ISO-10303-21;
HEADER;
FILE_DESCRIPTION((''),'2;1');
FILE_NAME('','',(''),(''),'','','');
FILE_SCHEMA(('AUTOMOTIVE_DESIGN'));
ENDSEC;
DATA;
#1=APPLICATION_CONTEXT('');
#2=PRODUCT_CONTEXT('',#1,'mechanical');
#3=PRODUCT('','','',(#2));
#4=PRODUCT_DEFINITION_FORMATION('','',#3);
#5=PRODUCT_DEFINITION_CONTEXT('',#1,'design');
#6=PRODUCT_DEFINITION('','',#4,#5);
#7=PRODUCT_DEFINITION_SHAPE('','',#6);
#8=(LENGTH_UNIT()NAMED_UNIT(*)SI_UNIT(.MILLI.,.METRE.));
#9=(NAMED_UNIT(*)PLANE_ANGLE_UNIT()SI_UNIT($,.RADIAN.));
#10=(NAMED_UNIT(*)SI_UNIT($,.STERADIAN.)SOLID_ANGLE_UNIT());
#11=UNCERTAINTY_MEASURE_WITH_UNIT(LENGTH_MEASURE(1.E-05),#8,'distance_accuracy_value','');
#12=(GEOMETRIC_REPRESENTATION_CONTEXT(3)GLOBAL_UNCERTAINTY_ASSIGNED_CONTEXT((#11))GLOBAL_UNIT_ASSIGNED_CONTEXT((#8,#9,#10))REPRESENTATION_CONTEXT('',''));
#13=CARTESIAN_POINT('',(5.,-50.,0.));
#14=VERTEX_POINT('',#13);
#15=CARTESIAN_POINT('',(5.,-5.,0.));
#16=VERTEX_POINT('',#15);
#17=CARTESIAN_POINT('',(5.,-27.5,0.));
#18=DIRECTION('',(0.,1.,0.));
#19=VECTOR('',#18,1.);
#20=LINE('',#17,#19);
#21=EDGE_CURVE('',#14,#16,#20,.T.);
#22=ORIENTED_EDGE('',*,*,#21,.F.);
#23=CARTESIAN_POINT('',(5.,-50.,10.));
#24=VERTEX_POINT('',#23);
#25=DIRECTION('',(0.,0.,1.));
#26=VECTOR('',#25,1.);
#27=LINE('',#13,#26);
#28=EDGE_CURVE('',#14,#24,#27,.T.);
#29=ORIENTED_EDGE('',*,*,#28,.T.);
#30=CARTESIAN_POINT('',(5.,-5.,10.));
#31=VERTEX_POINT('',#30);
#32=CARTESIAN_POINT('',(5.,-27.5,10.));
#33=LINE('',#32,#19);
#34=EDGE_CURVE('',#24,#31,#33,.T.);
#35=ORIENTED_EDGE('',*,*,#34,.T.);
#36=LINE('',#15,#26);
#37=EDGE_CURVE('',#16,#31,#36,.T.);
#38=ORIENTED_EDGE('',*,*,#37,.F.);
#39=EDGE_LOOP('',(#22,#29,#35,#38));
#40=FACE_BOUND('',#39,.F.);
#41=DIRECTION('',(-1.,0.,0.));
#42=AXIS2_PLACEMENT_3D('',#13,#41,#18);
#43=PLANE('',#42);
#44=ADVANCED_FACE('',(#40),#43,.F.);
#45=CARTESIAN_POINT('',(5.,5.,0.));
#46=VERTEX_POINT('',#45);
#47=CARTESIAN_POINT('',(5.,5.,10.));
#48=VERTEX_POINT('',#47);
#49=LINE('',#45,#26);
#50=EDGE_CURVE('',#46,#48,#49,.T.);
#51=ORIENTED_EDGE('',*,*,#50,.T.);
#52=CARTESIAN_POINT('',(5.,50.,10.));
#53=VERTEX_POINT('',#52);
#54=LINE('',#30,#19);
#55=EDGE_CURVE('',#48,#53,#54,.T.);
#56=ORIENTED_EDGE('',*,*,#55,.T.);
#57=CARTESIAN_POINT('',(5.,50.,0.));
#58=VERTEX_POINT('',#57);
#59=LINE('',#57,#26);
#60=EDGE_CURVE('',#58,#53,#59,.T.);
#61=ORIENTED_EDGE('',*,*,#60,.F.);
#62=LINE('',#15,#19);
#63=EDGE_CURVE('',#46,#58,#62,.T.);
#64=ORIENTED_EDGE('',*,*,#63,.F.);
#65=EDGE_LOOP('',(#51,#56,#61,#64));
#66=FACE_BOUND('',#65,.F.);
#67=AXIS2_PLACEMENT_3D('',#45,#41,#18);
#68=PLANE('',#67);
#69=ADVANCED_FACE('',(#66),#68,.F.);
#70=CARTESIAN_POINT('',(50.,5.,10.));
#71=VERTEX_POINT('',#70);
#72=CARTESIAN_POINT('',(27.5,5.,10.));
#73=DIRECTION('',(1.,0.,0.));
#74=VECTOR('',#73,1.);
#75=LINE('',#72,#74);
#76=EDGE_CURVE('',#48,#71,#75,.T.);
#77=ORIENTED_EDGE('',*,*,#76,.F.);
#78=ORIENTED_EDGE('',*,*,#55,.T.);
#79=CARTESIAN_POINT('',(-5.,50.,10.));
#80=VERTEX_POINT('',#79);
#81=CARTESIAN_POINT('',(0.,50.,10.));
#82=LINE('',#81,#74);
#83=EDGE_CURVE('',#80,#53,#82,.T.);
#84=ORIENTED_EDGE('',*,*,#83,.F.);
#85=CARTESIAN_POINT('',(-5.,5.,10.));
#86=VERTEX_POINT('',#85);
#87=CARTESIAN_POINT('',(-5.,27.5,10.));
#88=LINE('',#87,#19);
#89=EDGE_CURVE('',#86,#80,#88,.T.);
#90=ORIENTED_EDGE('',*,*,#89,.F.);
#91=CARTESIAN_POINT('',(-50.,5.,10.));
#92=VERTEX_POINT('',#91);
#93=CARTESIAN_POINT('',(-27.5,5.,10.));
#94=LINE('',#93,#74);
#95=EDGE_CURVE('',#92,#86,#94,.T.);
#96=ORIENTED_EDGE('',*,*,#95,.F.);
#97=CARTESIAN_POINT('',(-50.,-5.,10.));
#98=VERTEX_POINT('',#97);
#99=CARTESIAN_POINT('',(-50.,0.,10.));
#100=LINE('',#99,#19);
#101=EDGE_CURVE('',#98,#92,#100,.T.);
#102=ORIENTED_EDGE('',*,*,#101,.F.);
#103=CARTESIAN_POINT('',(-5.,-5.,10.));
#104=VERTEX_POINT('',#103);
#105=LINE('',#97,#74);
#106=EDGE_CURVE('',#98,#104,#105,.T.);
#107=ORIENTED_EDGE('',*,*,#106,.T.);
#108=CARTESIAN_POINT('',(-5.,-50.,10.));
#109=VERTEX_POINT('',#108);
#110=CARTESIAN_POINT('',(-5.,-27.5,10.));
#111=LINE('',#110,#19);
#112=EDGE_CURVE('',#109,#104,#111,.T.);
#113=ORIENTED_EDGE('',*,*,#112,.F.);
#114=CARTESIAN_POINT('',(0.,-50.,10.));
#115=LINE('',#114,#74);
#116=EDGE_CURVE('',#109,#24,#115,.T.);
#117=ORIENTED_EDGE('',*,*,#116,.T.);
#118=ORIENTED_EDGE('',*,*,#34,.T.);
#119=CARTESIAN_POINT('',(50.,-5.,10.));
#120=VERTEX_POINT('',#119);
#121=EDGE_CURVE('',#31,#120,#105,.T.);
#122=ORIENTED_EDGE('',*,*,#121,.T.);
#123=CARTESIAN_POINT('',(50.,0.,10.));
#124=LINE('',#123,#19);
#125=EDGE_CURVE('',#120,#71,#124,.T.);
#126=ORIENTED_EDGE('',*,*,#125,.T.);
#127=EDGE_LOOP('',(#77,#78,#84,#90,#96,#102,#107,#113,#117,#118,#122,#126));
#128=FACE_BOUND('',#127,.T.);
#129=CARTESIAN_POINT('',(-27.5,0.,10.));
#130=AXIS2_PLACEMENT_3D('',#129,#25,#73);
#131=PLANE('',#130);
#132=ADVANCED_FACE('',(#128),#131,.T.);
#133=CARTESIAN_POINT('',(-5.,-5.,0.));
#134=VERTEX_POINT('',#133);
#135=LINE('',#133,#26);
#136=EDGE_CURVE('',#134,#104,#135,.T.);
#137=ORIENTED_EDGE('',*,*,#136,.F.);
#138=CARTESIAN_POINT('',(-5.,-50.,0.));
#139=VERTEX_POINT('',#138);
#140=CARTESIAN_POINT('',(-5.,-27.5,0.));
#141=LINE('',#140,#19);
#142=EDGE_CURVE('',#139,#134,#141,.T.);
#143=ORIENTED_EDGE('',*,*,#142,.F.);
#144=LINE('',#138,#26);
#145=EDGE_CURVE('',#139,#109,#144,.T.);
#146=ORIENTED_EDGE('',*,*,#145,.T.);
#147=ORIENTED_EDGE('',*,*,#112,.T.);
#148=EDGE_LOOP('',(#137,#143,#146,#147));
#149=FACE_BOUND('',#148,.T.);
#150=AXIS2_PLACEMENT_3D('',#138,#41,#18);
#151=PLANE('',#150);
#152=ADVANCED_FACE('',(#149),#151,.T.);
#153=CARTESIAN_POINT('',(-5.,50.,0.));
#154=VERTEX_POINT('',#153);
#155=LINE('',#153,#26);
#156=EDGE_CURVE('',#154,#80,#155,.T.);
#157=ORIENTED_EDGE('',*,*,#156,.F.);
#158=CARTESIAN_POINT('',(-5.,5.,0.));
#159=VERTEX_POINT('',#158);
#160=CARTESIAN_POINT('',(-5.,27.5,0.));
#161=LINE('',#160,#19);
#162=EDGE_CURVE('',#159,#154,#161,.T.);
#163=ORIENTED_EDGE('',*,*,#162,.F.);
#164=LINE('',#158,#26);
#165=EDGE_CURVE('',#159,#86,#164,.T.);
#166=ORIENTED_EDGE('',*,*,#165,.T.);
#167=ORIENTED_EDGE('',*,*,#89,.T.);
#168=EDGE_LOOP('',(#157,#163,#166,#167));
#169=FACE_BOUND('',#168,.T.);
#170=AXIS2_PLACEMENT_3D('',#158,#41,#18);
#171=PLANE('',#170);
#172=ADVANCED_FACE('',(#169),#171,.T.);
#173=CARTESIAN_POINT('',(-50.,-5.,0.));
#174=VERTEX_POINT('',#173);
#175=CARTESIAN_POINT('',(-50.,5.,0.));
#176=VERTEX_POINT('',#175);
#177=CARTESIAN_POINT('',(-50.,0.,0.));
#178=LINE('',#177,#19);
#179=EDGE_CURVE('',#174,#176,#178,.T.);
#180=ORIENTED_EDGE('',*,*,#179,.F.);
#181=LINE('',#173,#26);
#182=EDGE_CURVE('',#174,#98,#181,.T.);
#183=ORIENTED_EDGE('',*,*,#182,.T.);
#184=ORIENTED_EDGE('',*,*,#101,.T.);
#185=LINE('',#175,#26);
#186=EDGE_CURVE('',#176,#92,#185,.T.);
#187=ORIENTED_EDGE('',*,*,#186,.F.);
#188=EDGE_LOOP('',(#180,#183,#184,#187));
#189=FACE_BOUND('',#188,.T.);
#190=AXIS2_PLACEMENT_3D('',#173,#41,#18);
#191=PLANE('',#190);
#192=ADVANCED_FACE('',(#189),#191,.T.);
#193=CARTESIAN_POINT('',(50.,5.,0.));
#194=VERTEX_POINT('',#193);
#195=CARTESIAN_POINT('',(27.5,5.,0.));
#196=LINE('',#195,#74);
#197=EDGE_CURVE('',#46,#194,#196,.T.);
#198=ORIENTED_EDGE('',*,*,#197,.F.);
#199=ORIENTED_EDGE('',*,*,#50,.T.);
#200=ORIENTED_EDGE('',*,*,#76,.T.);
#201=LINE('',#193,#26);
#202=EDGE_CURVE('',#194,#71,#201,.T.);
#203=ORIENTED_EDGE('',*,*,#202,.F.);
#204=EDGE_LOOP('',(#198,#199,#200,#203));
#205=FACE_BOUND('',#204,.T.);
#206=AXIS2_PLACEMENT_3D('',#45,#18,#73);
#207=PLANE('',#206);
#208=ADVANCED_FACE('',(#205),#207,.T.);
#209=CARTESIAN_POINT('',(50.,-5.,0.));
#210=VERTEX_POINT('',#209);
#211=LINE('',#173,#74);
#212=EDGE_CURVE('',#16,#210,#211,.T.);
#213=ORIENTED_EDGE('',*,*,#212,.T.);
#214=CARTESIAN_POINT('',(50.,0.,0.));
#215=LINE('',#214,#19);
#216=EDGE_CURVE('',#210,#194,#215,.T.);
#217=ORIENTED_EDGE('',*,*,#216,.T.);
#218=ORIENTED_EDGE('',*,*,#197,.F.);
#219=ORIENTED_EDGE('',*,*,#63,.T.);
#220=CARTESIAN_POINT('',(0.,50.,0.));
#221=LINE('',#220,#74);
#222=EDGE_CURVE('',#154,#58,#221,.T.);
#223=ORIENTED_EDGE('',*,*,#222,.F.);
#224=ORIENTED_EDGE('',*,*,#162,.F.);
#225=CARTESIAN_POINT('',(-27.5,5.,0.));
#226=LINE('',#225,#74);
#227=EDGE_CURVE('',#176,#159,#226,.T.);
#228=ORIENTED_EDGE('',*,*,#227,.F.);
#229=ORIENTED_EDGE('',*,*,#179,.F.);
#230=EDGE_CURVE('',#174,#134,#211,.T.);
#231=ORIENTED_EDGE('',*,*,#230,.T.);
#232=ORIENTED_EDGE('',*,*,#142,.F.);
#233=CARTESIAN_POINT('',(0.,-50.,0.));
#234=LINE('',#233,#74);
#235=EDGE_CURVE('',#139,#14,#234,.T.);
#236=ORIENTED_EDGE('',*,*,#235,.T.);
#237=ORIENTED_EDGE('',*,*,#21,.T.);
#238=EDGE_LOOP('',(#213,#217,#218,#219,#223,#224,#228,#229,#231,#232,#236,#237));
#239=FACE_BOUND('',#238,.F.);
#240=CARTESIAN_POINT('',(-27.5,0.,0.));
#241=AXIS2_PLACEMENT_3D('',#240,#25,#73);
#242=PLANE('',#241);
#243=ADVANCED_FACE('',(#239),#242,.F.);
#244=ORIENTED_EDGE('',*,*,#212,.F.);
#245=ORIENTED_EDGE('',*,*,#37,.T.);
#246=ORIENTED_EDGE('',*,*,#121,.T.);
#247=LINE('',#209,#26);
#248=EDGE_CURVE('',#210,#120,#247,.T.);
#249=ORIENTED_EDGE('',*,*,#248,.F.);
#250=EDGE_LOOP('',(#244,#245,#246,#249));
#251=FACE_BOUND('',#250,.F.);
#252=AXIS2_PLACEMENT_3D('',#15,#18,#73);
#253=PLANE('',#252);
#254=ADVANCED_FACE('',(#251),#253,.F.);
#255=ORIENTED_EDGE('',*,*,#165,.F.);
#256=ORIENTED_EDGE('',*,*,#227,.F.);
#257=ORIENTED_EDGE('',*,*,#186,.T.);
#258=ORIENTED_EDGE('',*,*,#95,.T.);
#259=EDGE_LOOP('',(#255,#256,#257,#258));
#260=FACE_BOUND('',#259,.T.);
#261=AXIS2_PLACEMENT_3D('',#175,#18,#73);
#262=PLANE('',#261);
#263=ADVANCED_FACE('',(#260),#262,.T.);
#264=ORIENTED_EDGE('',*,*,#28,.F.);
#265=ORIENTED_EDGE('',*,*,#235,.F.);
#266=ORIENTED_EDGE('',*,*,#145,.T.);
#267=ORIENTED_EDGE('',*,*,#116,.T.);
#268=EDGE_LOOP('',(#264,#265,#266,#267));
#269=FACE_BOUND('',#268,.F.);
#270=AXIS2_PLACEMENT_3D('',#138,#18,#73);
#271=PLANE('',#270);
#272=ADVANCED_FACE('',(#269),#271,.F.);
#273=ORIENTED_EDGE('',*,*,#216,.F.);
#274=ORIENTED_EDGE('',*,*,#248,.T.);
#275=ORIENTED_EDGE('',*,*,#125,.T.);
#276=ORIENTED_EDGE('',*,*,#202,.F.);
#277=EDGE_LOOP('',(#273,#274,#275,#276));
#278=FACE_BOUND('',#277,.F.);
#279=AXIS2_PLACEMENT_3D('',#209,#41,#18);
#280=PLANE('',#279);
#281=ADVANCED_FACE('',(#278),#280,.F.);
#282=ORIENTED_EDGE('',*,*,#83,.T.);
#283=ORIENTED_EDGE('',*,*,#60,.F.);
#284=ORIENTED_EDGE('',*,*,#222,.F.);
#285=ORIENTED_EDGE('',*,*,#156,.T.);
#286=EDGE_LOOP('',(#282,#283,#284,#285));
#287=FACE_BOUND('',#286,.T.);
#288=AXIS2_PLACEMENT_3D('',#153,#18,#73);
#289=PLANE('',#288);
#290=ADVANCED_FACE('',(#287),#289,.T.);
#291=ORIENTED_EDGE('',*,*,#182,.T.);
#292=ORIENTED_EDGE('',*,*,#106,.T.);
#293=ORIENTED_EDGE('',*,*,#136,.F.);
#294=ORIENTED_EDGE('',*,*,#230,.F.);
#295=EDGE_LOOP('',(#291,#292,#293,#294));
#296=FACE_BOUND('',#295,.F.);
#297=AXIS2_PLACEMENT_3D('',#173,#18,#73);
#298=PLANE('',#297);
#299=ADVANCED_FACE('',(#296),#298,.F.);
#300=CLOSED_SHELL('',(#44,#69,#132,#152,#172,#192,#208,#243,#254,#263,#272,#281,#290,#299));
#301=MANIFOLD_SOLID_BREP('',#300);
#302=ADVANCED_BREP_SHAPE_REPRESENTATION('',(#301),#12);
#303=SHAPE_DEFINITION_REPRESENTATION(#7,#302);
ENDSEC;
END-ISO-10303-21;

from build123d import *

# Parameters (mm, degrees)
F0_W     = 45
F0_H     = 10
F0_W_2   = 10
F0_H_2   = 45
F1_DEPTH = 10


# Not quite as in the source:
# - a feature of the source that left no trace in its solid (it failed there, or was rolled back) is left out


with BuildPart() as f1:
    # F0 (on Top) → F1 (new body)
    with BuildSketch(Plane.XY):
        with Locations((-27.5, 0)):
            Rectangle(F0_W, F0_H)
        with Locations((0, 27.5)):
            Rectangle(F0_W_2, F0_H_2)
        Rectangle(F0_W_2, F0_H)
        with Locations((27.5, 0)):
            Rectangle(F0_W, F0_H)
        with Locations((0, -27.5)):
            Rectangle(F0_W_2, F0_H_2)
    extrude(amount=F1_DEPTH)


solid = f1.part
